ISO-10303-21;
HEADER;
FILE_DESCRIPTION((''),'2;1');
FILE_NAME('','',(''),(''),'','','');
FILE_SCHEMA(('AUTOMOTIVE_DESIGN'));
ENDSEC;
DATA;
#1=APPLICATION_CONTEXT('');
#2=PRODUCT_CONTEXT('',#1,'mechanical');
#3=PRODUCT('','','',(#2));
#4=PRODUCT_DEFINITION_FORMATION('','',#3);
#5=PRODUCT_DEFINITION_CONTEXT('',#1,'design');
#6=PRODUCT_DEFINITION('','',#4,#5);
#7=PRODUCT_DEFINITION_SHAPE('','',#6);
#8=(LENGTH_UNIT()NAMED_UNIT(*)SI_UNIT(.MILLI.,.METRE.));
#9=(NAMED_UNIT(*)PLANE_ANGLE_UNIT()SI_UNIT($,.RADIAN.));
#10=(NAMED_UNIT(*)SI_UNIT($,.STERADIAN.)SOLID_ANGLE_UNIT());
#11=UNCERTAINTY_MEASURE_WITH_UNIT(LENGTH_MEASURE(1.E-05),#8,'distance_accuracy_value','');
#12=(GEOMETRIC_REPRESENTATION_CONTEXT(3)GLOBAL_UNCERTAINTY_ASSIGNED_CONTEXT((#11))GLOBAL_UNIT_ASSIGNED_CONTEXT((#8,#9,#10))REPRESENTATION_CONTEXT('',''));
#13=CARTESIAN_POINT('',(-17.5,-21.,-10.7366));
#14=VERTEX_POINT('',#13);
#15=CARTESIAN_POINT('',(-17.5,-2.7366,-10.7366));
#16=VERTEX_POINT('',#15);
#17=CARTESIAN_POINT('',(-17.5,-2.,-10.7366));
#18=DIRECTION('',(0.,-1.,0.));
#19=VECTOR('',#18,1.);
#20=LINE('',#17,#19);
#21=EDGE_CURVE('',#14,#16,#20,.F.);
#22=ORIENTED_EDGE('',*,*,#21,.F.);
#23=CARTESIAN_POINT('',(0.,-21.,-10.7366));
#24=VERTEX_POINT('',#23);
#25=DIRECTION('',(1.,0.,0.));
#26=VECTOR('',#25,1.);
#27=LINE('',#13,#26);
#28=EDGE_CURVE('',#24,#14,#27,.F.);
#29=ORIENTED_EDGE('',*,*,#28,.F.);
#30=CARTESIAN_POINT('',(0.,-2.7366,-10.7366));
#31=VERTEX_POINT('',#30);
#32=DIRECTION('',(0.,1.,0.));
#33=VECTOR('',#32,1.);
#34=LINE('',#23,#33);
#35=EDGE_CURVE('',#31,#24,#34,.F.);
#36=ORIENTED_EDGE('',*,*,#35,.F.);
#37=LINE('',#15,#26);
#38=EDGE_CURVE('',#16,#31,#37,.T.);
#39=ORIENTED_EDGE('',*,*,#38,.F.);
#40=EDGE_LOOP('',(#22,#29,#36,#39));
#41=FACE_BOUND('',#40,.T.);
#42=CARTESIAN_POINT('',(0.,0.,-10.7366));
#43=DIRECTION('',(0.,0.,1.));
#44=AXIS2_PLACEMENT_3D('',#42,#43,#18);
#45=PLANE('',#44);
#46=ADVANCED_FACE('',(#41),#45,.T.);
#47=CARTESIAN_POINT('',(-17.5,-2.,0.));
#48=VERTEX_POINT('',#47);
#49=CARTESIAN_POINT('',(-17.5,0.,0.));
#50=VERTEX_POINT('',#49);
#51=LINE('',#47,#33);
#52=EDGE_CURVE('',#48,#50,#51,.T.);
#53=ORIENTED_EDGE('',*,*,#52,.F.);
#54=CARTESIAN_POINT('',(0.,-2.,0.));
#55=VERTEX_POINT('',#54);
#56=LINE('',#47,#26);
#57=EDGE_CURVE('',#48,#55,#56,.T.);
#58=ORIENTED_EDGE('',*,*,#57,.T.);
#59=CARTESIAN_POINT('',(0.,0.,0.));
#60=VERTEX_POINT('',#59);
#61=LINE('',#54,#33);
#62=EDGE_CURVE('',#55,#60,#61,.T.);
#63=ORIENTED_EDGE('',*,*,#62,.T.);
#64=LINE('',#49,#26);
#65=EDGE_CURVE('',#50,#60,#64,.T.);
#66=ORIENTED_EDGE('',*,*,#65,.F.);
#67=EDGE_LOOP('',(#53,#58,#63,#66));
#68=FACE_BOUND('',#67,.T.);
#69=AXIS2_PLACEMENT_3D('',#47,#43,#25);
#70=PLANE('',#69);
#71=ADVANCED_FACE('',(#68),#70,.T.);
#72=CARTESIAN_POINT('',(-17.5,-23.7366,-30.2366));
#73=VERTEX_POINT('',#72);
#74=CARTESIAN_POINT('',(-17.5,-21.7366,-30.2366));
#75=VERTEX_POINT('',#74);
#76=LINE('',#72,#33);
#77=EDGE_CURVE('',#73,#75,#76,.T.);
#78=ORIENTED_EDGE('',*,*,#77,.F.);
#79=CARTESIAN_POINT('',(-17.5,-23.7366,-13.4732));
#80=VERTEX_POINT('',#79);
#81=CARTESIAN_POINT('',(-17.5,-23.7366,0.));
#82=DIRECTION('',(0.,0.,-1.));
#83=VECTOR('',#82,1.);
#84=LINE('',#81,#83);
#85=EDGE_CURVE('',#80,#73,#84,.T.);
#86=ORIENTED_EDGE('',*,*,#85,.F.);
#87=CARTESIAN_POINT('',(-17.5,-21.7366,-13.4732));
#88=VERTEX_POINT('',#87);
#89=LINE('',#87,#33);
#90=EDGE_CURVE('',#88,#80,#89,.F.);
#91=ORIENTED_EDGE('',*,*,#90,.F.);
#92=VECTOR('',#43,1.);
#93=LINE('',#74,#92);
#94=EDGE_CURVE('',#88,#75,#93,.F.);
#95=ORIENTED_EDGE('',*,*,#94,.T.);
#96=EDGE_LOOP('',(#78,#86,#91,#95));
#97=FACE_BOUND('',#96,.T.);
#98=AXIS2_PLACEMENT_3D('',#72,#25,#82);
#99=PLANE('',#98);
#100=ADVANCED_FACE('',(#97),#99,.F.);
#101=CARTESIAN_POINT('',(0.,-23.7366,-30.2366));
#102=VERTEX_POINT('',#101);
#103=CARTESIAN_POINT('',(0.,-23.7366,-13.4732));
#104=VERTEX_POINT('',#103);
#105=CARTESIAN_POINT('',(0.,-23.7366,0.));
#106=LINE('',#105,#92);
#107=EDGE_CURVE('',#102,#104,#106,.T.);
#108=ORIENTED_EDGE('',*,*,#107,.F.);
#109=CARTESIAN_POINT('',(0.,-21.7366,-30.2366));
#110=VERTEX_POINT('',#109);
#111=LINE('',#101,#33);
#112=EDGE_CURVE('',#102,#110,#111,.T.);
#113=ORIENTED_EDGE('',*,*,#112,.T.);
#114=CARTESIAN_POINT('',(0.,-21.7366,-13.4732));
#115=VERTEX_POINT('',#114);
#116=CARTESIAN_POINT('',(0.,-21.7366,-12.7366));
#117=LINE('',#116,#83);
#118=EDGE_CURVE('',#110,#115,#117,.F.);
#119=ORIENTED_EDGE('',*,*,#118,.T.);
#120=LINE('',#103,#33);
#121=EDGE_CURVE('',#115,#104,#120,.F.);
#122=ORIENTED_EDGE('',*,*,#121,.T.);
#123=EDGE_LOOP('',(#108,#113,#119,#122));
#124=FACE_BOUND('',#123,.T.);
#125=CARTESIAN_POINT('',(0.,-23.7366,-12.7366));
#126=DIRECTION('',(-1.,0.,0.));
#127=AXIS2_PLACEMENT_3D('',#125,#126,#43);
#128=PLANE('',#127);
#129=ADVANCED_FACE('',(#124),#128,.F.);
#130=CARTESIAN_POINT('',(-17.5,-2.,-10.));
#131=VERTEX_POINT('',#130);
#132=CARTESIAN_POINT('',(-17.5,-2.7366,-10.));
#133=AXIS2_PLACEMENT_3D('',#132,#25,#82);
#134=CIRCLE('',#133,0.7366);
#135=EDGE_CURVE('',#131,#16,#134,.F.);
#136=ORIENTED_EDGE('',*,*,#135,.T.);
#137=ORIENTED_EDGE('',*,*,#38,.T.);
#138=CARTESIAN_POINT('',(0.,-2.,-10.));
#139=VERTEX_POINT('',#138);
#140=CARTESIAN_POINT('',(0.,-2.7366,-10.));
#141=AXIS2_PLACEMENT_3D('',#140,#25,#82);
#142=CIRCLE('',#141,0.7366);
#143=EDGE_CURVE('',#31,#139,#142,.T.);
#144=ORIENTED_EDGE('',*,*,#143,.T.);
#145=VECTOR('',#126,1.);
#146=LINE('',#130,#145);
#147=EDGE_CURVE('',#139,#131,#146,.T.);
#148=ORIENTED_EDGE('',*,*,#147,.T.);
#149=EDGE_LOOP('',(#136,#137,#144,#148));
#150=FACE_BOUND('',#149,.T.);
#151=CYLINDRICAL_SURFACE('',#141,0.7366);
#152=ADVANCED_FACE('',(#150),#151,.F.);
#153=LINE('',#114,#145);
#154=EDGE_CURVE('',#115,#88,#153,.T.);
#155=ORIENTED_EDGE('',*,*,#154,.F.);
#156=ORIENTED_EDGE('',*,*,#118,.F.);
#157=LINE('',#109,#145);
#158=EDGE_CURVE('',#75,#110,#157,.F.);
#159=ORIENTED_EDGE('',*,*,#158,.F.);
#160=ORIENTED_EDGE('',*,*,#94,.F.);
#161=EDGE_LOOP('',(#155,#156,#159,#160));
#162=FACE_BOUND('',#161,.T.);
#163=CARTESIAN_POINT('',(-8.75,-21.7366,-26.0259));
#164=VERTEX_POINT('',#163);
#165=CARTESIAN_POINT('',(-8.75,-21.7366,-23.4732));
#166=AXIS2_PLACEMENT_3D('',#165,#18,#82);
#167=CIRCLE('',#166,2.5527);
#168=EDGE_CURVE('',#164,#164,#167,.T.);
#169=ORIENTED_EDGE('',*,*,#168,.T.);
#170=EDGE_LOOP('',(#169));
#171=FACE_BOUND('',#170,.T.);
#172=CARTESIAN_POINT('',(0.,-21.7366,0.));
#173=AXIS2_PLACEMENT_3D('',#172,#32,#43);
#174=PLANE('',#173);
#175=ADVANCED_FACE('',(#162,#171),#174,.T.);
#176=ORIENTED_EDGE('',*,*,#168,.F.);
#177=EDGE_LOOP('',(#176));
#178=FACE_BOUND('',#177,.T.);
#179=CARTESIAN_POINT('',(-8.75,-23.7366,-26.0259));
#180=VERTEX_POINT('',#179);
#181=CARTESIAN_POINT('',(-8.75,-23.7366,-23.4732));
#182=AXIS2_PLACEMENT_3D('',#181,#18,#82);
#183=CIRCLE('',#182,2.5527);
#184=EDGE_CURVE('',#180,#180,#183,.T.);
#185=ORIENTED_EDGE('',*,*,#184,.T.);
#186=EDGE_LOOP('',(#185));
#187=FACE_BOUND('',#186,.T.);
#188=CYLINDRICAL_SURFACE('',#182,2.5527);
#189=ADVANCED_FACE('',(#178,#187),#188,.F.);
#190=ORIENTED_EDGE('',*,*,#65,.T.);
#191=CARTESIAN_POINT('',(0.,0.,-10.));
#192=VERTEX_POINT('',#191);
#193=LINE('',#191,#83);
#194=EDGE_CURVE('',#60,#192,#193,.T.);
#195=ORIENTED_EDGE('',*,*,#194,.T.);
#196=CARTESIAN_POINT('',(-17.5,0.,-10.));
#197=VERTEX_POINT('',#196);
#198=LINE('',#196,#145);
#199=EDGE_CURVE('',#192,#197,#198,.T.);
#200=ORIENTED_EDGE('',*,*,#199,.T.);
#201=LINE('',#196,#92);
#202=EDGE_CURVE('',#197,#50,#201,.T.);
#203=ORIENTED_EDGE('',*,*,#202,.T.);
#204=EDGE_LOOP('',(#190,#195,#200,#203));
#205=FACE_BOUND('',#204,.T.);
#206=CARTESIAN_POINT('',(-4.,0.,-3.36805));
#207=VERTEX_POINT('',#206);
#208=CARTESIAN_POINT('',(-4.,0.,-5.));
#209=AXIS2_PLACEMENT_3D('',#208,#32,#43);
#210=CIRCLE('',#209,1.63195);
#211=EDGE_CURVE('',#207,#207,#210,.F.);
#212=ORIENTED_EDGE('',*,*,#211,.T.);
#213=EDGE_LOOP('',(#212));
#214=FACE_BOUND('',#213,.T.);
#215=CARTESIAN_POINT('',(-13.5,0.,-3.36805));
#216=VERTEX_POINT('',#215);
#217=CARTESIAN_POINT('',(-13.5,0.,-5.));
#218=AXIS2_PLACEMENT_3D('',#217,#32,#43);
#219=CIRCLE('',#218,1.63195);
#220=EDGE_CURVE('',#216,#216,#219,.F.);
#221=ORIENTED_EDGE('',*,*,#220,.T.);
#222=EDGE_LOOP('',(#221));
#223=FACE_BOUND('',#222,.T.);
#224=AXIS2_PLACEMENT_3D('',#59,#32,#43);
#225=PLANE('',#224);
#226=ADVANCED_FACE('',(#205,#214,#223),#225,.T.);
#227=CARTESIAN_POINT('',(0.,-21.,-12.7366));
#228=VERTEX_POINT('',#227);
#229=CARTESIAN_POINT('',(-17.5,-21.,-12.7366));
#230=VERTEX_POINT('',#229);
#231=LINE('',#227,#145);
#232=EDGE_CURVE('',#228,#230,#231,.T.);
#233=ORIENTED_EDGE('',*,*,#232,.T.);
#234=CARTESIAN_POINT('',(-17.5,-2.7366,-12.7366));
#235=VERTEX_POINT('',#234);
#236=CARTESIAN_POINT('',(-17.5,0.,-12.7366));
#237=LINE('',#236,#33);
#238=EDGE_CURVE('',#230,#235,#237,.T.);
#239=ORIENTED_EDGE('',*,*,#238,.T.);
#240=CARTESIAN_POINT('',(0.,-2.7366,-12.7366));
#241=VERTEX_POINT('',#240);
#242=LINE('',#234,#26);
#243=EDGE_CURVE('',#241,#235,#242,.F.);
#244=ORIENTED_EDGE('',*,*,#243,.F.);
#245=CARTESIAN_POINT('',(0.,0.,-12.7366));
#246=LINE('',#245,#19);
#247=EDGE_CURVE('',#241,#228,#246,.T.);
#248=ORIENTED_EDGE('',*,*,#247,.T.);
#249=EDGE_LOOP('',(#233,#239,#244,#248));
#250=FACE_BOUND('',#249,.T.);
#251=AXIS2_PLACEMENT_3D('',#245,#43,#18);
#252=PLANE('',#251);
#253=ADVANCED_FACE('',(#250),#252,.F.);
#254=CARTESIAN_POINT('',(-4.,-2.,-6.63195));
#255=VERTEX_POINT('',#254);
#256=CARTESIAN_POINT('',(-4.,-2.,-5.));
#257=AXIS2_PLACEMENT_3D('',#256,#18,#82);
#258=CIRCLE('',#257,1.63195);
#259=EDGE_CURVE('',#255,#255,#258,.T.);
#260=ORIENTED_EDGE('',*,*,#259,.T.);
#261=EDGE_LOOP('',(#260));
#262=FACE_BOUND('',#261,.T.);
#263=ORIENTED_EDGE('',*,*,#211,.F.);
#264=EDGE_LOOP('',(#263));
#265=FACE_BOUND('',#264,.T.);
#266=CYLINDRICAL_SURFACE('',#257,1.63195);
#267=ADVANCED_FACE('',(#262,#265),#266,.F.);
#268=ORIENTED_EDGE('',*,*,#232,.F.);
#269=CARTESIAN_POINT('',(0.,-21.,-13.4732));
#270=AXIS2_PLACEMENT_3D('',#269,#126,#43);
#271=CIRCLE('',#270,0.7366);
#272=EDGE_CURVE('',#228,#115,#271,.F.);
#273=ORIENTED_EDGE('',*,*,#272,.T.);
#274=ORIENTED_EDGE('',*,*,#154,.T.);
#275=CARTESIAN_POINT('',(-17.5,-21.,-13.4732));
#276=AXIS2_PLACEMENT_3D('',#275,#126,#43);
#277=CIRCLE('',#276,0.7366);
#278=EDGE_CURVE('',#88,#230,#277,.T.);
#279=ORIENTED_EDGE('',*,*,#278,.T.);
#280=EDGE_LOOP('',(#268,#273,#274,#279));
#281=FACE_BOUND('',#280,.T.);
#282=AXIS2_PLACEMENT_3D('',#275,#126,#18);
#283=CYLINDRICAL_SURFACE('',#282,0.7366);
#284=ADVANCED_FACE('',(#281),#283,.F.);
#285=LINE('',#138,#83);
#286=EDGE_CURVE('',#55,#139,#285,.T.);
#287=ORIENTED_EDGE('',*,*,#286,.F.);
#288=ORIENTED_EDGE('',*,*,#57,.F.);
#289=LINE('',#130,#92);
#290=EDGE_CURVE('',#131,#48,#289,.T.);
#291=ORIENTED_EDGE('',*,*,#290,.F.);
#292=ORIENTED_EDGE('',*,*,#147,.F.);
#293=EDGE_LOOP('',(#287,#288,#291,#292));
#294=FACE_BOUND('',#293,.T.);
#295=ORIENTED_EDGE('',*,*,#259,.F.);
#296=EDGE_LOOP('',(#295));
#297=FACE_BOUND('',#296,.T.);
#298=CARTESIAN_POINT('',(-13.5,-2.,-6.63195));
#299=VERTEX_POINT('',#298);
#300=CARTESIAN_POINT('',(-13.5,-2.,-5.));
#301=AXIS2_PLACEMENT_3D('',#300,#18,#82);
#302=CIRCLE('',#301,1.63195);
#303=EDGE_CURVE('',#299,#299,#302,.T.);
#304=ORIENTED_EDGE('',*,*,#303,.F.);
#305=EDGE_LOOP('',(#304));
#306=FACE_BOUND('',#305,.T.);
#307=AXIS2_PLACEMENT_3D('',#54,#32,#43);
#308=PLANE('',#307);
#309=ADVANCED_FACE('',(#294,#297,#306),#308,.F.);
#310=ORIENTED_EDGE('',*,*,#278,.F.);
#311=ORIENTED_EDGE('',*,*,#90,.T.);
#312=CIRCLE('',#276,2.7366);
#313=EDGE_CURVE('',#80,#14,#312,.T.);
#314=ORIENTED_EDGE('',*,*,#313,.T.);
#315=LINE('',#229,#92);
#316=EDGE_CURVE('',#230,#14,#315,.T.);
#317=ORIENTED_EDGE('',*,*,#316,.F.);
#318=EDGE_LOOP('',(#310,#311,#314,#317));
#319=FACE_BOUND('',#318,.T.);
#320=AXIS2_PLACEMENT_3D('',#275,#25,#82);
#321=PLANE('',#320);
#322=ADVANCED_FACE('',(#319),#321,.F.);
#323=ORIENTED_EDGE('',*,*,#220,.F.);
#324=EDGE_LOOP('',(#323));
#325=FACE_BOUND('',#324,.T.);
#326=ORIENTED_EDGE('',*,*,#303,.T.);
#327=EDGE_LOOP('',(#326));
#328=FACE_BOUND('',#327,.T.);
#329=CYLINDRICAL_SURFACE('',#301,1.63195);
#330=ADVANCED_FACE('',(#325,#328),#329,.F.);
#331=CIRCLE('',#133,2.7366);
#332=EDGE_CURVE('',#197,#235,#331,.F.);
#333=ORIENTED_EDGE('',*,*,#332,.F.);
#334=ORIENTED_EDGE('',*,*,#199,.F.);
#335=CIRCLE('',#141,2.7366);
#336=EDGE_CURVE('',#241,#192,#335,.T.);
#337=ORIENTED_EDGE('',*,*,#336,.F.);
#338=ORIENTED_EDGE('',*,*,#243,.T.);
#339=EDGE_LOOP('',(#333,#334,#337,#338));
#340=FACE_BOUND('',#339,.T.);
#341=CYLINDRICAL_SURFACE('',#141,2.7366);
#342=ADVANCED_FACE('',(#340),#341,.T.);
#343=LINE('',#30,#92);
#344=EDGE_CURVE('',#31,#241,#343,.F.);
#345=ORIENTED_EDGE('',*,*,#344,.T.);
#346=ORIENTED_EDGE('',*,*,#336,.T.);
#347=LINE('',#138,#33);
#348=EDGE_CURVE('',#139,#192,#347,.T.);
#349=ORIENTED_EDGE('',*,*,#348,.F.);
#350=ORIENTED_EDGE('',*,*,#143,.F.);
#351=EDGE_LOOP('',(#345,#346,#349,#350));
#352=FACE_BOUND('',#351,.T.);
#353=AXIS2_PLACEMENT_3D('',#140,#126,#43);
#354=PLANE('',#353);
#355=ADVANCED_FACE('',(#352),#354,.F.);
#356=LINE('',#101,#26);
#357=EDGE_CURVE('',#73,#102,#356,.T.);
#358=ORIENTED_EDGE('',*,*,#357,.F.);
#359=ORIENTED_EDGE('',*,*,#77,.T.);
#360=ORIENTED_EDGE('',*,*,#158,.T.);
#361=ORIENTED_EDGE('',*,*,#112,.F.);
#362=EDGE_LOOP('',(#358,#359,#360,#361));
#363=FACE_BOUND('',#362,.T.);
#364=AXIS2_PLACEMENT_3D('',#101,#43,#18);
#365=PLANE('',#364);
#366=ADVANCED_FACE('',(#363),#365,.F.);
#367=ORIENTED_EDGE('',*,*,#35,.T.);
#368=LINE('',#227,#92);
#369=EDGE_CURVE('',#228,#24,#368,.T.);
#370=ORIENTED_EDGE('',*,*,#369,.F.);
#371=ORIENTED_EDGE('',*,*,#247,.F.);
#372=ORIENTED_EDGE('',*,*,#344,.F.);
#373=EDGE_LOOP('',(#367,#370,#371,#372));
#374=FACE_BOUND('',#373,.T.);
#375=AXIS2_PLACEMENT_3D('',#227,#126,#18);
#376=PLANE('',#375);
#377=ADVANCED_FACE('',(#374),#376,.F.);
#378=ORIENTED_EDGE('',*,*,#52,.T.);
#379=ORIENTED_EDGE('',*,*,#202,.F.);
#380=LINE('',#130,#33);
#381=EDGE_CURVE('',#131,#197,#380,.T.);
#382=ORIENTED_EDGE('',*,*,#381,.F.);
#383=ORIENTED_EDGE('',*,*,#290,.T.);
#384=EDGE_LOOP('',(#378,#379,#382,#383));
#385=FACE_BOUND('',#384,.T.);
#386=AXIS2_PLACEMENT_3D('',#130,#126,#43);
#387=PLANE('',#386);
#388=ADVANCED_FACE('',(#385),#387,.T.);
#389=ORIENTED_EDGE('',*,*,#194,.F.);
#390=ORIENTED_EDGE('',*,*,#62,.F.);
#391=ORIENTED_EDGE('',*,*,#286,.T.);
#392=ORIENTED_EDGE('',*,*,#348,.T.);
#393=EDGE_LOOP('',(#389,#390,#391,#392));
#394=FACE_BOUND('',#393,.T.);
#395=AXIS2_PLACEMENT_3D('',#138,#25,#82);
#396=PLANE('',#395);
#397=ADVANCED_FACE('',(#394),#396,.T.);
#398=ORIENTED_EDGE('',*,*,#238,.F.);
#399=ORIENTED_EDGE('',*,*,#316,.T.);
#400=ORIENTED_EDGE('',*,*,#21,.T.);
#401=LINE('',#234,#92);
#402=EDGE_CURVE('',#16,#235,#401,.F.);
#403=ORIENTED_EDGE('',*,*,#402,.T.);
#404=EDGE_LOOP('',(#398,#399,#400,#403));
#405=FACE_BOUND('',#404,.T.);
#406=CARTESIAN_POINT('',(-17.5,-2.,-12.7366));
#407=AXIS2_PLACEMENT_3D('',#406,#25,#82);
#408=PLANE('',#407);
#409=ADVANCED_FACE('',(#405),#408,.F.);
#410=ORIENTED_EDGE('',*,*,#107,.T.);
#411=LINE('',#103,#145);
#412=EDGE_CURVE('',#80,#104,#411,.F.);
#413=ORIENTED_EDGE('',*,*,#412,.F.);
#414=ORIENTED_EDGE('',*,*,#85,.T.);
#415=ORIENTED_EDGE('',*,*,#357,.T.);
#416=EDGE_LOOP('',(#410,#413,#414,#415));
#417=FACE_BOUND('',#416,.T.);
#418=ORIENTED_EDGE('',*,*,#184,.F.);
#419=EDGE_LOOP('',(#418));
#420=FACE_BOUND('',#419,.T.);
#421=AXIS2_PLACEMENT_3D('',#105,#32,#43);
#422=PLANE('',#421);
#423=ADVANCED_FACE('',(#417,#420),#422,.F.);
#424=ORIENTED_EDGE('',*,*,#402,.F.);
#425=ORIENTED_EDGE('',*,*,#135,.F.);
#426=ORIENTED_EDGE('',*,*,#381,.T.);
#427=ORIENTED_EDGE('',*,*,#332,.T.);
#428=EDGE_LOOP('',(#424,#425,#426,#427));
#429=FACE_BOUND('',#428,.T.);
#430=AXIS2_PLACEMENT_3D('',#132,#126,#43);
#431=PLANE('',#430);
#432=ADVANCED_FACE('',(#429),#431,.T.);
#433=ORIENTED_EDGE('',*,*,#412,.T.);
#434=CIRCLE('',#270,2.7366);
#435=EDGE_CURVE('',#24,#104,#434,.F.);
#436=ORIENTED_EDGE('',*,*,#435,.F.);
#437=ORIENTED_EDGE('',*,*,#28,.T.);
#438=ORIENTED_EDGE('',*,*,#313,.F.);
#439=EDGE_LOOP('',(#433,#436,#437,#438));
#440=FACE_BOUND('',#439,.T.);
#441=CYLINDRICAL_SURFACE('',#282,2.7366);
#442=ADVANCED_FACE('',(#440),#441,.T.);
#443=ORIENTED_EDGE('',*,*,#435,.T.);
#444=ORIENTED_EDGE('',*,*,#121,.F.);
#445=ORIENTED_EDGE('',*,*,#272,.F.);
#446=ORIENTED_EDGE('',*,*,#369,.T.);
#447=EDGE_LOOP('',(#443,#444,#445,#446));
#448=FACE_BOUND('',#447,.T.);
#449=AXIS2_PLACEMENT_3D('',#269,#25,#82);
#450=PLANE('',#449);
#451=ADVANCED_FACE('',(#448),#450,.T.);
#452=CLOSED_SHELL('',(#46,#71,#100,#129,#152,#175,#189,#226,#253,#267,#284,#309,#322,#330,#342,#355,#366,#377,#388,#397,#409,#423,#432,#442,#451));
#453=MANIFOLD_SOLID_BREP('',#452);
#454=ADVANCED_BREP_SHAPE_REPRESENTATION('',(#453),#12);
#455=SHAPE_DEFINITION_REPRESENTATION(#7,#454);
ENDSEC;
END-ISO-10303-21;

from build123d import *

# Parameters (mm, degrees)
SKETCH1_W                  = 17.5
SKETCH1_H                  = 10
BASE_FLANGE1_DEPTH         = 2
F_4_CLEARANCE_HOLE1_D      = 3.2639
F_4_CLEARANCE_HOLE1_DEPTH  = 2
F_4_CLEARANCE_HOLE1_TIP    = 0.980574487
EDGE_FLANGE1_DEPTH         = 17.5
EDGE_FLANGE2_DEPTH         = 17.5
F_10_CLEARANCE_HOLE1_D     = 5.1054
F_10_CLEARANCE_HOLE1_DEPTH = 2
F_10_CLEARANCE_HOLE1_TIP   = 1.533816902


# Sheet-metal steps are written as plain solids
with BuildPart() as part:
    # Sketch1 → Base-Flange1 (new body)
    with BuildSketch(Plane(origin=(0, 0, 0), x_dir=(1, 0, 0), z_dir=(0, 1, 0))):
        with Locations((-8.75, 5)):
            Rectangle(SKETCH1_W, SKETCH1_H)
    extrude(amount=-BASE_FLANGE1_DEPTH)

    # #4 Clearance Hole1
    with Locations(Plane.XZ.offset(2)):
        with Locations((-4, -5), (-13.5, -5)):
            Hole(F_4_CLEARANCE_HOLE1_D / 2, depth=F_4_CLEARANCE_HOLE1_DEPTH)
            with Locations((0, 0, -(F_4_CLEARANCE_HOLE1_DEPTH + F_4_CLEARANCE_HOLE1_TIP / 2))):  # 118° drill point
                Cone(0, F_4_CLEARANCE_HOLE1_D / 2, F_4_CLEARANCE_HOLE1_TIP, mode=Mode.SUBTRACT)

    # Edge-Flange1 section (across the edge) → Edge-Flange1 (add)
    with BuildSketch(Plane(origin=(-17.5, -2, -10.7366), x_dir=(0, 0, 1), z_dir=(1, 0, 0))):
        with BuildLine():
            Line((-2, 0.7366), (-2, 19))
            Line((-2, 19), (0, 19))
            Line((0, 19), (0, 0.7366))
            ThreePointArc((0, 0.7366), (0.215745145, 0.215745145), (0.7366, 0))
            Line((0.7366, 0), (0.7366, -2))
            ThreePointArc((0.7366, -2), (-1.198468417, -1.198468417), (-2, 0.7366))
        make_face()
    extrude(amount=EDGE_FLANGE1_DEPTH)

    # Edge-Flange2 section (across the edge) → Edge-Flange2 (add)
    with BuildSketch(Plane(origin=(0, -21.7366, -12.7366), x_dir=(0, 1, 0), z_dir=(-1, 0, 0))):
        with BuildLine():
            Line((-2, 0.7366), (-2, 17.5))
            Line((-2, 17.5), (0, 17.5))
            Line((0, 17.5), (0, 0.7366))
            ThreePointArc((0, 0.7366), (0.215745145, 0.215745145), (0.7366, 0))
            Line((0.7366, 0), (0.7366, -2))
            ThreePointArc((0.7366, -2), (-1.198468417, -1.198468417), (-2, 0.7366))
        make_face()
    extrude(amount=EDGE_FLANGE2_DEPTH)

    # #10 Clearance Hole1
    with Locations(Plane.XZ.offset(23.7366)):
        with Locations((-8.75, -23.4732)):
            Hole(F_10_CLEARANCE_HOLE1_D / 2, depth=F_10_CLEARANCE_HOLE1_DEPTH)
            with Locations((0, 0, -(F_10_CLEARANCE_HOLE1_DEPTH + F_10_CLEARANCE_HOLE1_TIP / 2))):  # 118° drill point
                Cone(0, F_10_CLEARANCE_HOLE1_D / 2, F_10_CLEARANCE_HOLE1_TIP, mode=Mode.SUBTRACT)


solid = part.part
